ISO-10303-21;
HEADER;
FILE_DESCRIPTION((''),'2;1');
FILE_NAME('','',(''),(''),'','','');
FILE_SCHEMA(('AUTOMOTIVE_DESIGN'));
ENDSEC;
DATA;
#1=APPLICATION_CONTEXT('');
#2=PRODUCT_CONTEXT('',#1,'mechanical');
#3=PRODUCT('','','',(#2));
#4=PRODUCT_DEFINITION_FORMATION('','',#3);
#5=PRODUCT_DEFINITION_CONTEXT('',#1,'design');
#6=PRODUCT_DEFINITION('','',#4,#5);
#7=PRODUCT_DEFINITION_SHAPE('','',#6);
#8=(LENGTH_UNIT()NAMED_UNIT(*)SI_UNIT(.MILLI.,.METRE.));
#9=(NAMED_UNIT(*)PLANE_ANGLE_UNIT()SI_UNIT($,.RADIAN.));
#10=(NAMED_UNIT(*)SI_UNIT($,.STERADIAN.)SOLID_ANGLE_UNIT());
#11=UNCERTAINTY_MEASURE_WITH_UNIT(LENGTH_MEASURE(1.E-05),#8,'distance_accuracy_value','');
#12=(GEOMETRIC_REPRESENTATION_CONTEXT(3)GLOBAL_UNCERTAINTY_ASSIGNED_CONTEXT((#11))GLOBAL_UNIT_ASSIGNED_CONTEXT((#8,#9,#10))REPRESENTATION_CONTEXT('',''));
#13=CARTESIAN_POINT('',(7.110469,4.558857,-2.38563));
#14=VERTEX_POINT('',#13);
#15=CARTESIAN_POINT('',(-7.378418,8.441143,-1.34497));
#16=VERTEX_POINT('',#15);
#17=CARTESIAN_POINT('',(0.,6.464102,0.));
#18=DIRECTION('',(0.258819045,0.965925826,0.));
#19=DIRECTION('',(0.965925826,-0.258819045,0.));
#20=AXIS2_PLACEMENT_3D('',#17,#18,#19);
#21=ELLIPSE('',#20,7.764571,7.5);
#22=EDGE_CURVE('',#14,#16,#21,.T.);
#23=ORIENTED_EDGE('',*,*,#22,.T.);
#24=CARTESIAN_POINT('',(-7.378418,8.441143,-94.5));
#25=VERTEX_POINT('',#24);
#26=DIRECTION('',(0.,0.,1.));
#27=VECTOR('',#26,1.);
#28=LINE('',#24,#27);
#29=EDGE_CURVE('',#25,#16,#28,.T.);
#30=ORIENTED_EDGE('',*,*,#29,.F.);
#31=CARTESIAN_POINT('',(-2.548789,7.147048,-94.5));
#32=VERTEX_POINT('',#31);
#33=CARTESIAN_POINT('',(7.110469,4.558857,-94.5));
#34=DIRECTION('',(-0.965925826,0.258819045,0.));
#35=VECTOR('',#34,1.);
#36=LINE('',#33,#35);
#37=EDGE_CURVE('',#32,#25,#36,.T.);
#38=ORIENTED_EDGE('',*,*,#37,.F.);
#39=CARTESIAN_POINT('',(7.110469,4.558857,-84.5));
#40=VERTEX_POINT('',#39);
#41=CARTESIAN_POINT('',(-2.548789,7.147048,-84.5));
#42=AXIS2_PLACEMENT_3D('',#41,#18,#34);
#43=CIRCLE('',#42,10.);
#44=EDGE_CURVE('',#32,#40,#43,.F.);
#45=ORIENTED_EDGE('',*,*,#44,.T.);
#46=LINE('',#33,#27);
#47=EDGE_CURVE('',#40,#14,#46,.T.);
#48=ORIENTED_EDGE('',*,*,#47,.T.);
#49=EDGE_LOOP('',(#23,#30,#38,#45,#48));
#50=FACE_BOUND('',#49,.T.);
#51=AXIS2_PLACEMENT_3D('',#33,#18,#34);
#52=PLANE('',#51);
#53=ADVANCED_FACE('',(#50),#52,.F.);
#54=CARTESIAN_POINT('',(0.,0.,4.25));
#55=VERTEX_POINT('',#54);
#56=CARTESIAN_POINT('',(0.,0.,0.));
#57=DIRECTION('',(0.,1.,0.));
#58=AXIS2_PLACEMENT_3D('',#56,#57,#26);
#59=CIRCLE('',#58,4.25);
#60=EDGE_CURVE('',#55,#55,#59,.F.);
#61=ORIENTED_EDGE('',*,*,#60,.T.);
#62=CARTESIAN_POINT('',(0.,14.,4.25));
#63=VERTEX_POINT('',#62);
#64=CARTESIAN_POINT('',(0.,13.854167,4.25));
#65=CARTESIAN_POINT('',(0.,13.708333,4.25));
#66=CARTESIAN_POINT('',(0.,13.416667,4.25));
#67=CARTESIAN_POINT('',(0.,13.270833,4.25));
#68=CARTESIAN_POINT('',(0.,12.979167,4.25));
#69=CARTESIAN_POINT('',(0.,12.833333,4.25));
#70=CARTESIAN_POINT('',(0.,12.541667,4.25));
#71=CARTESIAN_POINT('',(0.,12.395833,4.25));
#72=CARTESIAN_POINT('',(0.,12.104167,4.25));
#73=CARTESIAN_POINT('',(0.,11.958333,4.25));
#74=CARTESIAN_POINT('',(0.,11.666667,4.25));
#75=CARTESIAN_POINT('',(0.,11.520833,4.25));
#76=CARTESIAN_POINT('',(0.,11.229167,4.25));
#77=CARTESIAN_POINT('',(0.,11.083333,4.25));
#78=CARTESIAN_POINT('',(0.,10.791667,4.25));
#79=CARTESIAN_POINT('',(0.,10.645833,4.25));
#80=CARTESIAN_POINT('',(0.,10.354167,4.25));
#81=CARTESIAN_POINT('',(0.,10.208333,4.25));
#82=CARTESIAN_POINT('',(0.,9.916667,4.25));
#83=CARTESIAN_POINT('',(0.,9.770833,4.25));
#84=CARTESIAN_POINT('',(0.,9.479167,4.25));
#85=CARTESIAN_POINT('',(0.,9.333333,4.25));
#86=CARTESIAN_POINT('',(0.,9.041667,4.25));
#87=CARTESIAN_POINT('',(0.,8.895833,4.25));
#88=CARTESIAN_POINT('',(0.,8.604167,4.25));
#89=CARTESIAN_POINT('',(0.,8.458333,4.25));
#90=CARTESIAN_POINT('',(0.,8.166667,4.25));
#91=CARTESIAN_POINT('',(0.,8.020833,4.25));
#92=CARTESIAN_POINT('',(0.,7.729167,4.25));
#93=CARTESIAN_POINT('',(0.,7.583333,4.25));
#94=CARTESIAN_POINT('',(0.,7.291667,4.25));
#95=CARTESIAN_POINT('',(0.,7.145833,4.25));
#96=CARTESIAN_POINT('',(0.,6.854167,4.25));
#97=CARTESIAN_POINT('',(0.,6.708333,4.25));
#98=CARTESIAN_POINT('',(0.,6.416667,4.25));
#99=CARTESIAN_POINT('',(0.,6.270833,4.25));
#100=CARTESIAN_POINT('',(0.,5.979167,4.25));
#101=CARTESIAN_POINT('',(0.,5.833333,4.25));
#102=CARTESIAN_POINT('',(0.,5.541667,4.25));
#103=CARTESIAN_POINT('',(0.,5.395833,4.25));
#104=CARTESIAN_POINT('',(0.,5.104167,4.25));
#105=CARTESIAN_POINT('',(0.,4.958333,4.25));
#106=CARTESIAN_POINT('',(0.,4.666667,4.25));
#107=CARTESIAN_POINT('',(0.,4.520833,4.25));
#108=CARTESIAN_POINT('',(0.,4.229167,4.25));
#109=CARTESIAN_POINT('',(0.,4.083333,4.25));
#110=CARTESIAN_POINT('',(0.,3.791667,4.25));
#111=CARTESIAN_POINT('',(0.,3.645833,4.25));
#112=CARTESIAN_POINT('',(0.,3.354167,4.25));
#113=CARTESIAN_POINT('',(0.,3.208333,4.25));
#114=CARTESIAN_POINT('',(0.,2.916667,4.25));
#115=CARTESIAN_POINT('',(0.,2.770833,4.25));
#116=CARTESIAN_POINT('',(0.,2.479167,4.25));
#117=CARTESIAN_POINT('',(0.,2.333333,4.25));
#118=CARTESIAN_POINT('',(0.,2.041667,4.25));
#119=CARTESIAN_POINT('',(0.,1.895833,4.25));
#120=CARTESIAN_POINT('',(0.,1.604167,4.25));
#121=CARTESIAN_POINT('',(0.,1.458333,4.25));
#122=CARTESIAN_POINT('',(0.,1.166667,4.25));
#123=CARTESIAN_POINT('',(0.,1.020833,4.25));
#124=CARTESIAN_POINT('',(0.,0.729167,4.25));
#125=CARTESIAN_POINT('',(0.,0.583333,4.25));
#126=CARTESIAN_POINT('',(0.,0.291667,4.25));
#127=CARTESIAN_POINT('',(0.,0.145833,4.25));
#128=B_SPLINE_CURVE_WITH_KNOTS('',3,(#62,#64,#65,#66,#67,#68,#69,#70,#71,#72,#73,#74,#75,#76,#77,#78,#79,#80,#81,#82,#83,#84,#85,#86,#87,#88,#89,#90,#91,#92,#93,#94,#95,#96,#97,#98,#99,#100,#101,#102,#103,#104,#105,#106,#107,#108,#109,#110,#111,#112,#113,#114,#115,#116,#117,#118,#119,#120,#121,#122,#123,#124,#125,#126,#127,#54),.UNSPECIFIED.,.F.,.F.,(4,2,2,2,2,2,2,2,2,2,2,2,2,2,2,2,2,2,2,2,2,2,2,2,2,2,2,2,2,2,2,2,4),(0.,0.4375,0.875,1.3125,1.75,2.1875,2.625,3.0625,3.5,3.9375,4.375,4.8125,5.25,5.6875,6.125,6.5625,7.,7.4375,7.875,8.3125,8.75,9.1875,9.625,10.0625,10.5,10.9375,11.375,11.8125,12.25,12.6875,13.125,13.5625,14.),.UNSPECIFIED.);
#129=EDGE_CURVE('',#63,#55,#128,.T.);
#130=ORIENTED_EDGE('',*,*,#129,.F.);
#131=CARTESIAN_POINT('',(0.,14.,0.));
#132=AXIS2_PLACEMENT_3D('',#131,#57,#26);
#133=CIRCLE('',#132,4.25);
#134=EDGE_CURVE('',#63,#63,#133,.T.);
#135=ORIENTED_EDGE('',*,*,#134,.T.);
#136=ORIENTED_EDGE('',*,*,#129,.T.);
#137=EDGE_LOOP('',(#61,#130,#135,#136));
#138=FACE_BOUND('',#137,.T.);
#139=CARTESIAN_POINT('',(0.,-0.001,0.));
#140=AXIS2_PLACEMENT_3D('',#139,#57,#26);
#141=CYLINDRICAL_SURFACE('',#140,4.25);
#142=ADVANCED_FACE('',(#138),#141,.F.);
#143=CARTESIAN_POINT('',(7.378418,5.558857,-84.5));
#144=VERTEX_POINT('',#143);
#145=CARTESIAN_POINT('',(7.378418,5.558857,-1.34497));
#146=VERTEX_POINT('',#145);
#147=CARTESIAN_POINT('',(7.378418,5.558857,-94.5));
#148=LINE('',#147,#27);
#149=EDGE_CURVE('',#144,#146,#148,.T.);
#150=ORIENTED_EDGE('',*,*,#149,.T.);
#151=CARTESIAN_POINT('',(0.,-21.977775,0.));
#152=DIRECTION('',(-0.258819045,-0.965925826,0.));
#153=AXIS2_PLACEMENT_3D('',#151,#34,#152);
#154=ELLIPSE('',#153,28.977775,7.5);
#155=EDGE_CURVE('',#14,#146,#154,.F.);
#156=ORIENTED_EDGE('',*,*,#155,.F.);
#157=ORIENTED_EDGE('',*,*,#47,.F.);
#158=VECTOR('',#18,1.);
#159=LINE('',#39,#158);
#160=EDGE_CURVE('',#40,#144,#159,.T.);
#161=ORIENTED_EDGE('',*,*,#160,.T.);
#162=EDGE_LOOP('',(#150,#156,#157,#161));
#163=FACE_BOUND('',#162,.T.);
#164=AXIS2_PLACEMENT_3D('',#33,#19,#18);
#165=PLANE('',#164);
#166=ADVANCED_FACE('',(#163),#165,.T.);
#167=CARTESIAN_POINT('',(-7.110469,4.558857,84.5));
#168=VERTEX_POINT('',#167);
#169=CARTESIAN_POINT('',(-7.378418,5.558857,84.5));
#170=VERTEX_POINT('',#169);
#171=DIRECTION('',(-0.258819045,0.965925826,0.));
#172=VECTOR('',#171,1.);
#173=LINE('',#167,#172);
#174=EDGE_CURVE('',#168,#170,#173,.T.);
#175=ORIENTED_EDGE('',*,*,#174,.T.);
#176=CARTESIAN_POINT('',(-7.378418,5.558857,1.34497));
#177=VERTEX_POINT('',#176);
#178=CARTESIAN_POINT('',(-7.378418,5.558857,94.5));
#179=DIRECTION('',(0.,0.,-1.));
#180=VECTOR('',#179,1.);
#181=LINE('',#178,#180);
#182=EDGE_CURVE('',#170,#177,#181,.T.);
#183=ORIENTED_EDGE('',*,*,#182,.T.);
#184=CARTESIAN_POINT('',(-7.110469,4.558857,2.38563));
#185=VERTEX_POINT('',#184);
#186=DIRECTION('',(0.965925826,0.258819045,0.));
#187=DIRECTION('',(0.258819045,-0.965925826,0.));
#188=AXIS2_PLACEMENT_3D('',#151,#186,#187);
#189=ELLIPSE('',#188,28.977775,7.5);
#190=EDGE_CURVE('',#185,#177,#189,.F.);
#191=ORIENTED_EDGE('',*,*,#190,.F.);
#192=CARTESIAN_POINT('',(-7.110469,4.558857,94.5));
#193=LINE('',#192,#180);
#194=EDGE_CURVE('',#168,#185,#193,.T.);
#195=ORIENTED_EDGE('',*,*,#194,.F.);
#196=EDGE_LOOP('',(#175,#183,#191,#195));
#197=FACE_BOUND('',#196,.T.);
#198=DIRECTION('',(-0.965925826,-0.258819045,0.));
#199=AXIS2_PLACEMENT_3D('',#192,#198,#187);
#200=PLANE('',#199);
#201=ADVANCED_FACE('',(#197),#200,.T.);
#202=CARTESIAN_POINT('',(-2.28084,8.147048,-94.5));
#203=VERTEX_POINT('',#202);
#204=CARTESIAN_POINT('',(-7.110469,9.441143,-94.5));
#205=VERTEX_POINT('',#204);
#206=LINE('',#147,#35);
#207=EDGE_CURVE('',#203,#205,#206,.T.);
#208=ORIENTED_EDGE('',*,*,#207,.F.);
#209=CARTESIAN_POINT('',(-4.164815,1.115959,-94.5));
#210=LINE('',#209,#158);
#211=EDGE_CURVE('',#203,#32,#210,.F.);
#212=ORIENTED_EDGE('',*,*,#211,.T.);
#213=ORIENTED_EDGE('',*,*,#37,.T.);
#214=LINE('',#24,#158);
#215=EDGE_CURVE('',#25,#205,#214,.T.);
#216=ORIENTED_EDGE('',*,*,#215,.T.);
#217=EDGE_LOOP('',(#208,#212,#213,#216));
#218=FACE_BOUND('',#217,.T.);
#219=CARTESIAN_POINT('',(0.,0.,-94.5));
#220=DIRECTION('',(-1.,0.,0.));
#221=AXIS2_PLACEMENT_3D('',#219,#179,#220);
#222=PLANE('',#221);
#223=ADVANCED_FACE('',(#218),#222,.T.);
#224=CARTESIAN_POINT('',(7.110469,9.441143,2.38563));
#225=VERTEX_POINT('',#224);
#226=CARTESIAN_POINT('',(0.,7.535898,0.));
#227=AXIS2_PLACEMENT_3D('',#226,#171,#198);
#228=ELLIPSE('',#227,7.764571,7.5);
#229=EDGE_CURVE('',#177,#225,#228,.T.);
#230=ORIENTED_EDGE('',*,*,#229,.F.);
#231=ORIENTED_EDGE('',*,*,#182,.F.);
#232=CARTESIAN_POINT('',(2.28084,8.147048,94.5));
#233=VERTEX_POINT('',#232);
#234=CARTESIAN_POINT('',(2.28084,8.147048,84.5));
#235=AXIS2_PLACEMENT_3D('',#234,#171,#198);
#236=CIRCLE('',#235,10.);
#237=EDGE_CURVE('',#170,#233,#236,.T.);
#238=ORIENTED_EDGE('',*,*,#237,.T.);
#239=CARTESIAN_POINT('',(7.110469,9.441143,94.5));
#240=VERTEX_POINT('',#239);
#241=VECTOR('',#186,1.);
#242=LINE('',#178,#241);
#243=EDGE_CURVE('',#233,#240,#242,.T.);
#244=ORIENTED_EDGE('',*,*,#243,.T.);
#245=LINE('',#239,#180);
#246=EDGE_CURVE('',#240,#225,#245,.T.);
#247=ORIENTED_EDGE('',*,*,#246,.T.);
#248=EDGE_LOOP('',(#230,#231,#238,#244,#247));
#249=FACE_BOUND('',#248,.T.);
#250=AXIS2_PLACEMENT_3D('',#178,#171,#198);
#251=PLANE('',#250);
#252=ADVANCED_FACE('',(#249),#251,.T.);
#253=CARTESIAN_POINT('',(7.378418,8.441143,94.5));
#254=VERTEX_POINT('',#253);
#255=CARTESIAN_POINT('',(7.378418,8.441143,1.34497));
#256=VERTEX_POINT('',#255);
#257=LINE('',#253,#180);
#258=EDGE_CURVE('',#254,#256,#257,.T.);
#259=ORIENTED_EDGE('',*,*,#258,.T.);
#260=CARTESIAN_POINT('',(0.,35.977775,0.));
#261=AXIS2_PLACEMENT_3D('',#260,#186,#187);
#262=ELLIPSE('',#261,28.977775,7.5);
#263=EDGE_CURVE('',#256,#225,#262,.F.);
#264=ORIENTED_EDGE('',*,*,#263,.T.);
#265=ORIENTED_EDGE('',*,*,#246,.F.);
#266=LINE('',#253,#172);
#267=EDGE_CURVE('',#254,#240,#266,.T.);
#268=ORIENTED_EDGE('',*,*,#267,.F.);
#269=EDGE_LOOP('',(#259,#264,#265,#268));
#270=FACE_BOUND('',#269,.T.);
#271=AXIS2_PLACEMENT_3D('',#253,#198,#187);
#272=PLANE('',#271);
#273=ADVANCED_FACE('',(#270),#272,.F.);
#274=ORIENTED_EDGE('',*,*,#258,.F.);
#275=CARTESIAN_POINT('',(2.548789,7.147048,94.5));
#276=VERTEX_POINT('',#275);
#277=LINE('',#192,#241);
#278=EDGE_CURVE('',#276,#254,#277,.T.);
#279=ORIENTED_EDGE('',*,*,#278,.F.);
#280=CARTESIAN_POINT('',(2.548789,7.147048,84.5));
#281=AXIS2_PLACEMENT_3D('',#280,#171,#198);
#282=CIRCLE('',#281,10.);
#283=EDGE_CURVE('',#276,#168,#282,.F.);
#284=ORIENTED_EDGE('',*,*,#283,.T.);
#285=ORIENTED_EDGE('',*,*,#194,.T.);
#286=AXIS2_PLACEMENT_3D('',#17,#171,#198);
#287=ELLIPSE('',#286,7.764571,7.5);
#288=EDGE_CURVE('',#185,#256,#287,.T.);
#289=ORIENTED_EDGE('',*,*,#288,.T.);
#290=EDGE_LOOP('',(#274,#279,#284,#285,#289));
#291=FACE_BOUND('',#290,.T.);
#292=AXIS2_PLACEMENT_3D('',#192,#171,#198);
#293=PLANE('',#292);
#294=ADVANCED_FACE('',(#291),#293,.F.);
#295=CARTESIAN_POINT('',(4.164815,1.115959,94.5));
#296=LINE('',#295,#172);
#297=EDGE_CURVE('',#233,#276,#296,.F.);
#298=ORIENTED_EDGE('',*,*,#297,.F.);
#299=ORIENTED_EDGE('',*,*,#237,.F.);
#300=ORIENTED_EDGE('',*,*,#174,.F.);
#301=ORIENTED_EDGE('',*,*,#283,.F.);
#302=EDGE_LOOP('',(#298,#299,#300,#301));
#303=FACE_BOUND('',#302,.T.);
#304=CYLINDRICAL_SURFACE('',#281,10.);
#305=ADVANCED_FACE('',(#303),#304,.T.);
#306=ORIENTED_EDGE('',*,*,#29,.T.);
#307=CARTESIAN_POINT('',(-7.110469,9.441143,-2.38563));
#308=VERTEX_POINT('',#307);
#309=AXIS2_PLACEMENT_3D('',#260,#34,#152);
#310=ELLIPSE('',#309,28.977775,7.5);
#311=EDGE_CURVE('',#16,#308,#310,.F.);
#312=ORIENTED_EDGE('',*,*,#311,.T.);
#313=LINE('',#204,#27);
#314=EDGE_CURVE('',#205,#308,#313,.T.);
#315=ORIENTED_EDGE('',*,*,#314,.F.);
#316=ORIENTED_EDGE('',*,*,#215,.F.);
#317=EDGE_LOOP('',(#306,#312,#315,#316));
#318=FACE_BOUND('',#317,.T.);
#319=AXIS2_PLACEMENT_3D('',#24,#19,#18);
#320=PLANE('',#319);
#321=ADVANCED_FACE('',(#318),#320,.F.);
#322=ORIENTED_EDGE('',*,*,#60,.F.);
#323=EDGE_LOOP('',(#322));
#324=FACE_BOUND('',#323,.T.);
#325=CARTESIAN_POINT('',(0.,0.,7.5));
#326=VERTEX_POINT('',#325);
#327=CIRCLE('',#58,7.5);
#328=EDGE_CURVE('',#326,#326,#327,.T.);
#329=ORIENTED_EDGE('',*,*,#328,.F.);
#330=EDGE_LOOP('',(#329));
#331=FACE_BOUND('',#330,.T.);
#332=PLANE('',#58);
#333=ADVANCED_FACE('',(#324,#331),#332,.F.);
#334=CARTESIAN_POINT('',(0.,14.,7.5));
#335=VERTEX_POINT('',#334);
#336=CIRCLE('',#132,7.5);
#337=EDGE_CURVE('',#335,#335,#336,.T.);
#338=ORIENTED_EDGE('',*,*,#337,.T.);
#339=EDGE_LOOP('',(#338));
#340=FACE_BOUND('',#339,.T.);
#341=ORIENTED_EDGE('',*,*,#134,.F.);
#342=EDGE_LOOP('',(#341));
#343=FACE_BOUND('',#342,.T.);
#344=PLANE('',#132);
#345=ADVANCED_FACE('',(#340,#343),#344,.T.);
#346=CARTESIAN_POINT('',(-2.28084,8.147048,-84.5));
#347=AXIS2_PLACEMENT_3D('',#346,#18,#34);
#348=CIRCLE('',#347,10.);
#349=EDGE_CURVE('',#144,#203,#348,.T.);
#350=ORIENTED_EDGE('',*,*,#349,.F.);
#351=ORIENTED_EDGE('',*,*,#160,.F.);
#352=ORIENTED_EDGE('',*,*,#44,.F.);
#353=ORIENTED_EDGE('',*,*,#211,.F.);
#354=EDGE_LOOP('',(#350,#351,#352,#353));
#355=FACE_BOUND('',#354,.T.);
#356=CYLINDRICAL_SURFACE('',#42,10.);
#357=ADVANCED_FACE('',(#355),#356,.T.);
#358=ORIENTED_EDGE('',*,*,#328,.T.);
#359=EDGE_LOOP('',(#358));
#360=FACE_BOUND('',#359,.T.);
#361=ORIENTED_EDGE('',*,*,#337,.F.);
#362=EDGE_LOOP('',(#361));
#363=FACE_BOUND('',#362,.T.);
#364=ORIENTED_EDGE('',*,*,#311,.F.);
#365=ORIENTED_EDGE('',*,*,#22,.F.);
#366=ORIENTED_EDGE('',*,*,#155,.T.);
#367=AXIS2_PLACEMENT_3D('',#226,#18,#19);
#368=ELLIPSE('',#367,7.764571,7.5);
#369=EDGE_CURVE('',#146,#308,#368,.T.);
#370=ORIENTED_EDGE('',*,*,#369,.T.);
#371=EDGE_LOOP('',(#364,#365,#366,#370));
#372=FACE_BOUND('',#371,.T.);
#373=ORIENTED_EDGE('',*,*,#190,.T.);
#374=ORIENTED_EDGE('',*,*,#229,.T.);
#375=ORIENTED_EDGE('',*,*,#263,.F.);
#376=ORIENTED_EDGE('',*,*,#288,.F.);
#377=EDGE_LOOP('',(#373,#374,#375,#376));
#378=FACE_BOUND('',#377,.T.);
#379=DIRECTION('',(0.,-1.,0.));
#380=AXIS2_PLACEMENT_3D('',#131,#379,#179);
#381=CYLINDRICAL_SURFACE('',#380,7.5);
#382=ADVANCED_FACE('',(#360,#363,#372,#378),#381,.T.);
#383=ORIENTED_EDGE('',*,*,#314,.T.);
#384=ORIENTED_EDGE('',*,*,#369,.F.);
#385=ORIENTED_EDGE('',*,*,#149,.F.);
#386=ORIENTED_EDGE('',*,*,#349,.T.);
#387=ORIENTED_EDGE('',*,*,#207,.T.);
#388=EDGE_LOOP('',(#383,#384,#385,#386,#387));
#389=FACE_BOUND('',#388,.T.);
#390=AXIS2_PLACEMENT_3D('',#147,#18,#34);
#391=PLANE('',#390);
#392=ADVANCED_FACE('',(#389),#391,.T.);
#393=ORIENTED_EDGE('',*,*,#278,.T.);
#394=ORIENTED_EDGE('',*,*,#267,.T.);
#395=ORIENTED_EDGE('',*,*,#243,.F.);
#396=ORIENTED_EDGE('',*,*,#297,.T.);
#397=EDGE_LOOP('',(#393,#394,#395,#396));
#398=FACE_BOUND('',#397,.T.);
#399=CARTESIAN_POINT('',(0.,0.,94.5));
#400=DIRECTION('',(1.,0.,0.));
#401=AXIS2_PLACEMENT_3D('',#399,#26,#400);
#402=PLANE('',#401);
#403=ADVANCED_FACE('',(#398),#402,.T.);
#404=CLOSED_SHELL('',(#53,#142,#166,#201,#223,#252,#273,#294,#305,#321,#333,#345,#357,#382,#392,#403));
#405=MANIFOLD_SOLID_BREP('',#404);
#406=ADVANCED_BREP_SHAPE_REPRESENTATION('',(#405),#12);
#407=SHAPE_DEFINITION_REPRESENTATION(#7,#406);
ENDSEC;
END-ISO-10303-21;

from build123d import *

# Parameters (mm, degrees)
SKETCH1_R           = 7.5
BOSS_EXTRUDE2_DEPTH = 14
CUT_EXTRUDE1_REACH  = 19.564
SKETCH2_R           = 4.25
BOSS_EXTRUDE3_START = -7.279118874
BOSS_EXTRUDE3_DEPTH = 1.03527618
FILLET1_R           = 10
CIRPATTERN1_COUNT   = 2
FILLET3_R           = 10


with BuildPart() as part:
    # Sketch1 → Boss-Extrude2 (new body)
    with BuildSketch(Plane(origin=(0, 0, 0), x_dir=(1, 0, 0), z_dir=(0, 1, 0))):
        with Locations(Location((0, 0, 0), (0, 0, 270))):
            Circle(SKETCH1_R)
    extrude(amount=BOSS_EXTRUDE2_DEPTH)

    # Sketch2 → Cut-Extrude1 (cut, up to next)
    with BuildSketch(Plane(origin=(0, 14, 0), x_dir=(1, 0, 0), z_dir=(0, 1, 0)), mode=Mode.PRIVATE) as cut_extrude1_sk1:
        with Locations(Location((0, 0, 0), (0, 0, 270))):
            Circle(SKETCH2_R)
    cut_extrude1_tool1 = extrude(cut_extrude1_sk1.sketch, amount=-CUT_EXTRUDE1_REACH, mode=Mode.PRIVATE) & part.part
    add(cut_extrude1_tool1.solids().sort_by_distance((0, 14, 0))[0], mode=Mode.SUBTRACT)

    # Boss-Extrude3: read off the stored shape, not the designer's step
    # Boss-Extrude3 outline → Boss-Extrude3 (add)
    with BuildSketch(Plane(origin=(0, 0, 0), x_dir=(0.9659258262890672, 0.2588190451025251, 0), z_dir=(0.25881904510252507, -0.9659258262890672, 0)).offset(BOSS_EXTRUDE3_START)):
        with BuildLine():
            add(Edge.make_bspline(
                [(-5.688266684, 1.344969698), (-4.547659305, 7.389056985), (1.811733316, 7.498803292)],
                knots=[0.18030465, 0.18030465, 0.18030465, 1.551469461, 1.551469461, 1.551469461], degree=2, weights=[1, 0.771122328, 0.993637519]))
            add(Edge.make_bspline(
                [(1.811733316, 7.498803292), (8.171125936, 7.389056985), (9.311733316, 1.344969698)],
                knots=[1.590123193, 1.590123193, 1.590123193, 2.961288004, 2.961288004, 2.961288004], degree=2, weights=[0.993637519, 0.771122328, 1]))
            Line((9.311733316, 1.344969698), (9.311733316, 94.5))
            Line((9.311733316, 94.5), (-5.688266684, 94.5))
            Line((-5.688266684, 94.5), (-5.688266684, 1.344969698))
        make_face()
    boss_extrude3 = extrude(amount=BOSS_EXTRUDE3_DEPTH)

    # Fillet1
    fillet1_edges = [part.edges().sort_by_distance(p)[0] for p in [
        (-7.244443697, 5.058857162, 94.5),
    ]]
    fillet(fillet1_edges, radius=FILLET1_R)

    # CirPattern1: Boss-Extrude3 ×2 about axis
    cirpattern1_axis = Axis((0, 0, 0), (0, 1, 0))
    for i in range(1, CIRPATTERN1_COUNT):
        add(boss_extrude3.rotate(cirpattern1_axis, i * 360 / CIRPATTERN1_COUNT))

    # Fillet3
    fillet3_edges = [part.edges().sort_by_distance(p)[0] for p in [
        (7.244443697, 5.058857162, -94.5),
    ]]
    fillet(fillet3_edges, radius=FILLET3_R)


solid = part.part
